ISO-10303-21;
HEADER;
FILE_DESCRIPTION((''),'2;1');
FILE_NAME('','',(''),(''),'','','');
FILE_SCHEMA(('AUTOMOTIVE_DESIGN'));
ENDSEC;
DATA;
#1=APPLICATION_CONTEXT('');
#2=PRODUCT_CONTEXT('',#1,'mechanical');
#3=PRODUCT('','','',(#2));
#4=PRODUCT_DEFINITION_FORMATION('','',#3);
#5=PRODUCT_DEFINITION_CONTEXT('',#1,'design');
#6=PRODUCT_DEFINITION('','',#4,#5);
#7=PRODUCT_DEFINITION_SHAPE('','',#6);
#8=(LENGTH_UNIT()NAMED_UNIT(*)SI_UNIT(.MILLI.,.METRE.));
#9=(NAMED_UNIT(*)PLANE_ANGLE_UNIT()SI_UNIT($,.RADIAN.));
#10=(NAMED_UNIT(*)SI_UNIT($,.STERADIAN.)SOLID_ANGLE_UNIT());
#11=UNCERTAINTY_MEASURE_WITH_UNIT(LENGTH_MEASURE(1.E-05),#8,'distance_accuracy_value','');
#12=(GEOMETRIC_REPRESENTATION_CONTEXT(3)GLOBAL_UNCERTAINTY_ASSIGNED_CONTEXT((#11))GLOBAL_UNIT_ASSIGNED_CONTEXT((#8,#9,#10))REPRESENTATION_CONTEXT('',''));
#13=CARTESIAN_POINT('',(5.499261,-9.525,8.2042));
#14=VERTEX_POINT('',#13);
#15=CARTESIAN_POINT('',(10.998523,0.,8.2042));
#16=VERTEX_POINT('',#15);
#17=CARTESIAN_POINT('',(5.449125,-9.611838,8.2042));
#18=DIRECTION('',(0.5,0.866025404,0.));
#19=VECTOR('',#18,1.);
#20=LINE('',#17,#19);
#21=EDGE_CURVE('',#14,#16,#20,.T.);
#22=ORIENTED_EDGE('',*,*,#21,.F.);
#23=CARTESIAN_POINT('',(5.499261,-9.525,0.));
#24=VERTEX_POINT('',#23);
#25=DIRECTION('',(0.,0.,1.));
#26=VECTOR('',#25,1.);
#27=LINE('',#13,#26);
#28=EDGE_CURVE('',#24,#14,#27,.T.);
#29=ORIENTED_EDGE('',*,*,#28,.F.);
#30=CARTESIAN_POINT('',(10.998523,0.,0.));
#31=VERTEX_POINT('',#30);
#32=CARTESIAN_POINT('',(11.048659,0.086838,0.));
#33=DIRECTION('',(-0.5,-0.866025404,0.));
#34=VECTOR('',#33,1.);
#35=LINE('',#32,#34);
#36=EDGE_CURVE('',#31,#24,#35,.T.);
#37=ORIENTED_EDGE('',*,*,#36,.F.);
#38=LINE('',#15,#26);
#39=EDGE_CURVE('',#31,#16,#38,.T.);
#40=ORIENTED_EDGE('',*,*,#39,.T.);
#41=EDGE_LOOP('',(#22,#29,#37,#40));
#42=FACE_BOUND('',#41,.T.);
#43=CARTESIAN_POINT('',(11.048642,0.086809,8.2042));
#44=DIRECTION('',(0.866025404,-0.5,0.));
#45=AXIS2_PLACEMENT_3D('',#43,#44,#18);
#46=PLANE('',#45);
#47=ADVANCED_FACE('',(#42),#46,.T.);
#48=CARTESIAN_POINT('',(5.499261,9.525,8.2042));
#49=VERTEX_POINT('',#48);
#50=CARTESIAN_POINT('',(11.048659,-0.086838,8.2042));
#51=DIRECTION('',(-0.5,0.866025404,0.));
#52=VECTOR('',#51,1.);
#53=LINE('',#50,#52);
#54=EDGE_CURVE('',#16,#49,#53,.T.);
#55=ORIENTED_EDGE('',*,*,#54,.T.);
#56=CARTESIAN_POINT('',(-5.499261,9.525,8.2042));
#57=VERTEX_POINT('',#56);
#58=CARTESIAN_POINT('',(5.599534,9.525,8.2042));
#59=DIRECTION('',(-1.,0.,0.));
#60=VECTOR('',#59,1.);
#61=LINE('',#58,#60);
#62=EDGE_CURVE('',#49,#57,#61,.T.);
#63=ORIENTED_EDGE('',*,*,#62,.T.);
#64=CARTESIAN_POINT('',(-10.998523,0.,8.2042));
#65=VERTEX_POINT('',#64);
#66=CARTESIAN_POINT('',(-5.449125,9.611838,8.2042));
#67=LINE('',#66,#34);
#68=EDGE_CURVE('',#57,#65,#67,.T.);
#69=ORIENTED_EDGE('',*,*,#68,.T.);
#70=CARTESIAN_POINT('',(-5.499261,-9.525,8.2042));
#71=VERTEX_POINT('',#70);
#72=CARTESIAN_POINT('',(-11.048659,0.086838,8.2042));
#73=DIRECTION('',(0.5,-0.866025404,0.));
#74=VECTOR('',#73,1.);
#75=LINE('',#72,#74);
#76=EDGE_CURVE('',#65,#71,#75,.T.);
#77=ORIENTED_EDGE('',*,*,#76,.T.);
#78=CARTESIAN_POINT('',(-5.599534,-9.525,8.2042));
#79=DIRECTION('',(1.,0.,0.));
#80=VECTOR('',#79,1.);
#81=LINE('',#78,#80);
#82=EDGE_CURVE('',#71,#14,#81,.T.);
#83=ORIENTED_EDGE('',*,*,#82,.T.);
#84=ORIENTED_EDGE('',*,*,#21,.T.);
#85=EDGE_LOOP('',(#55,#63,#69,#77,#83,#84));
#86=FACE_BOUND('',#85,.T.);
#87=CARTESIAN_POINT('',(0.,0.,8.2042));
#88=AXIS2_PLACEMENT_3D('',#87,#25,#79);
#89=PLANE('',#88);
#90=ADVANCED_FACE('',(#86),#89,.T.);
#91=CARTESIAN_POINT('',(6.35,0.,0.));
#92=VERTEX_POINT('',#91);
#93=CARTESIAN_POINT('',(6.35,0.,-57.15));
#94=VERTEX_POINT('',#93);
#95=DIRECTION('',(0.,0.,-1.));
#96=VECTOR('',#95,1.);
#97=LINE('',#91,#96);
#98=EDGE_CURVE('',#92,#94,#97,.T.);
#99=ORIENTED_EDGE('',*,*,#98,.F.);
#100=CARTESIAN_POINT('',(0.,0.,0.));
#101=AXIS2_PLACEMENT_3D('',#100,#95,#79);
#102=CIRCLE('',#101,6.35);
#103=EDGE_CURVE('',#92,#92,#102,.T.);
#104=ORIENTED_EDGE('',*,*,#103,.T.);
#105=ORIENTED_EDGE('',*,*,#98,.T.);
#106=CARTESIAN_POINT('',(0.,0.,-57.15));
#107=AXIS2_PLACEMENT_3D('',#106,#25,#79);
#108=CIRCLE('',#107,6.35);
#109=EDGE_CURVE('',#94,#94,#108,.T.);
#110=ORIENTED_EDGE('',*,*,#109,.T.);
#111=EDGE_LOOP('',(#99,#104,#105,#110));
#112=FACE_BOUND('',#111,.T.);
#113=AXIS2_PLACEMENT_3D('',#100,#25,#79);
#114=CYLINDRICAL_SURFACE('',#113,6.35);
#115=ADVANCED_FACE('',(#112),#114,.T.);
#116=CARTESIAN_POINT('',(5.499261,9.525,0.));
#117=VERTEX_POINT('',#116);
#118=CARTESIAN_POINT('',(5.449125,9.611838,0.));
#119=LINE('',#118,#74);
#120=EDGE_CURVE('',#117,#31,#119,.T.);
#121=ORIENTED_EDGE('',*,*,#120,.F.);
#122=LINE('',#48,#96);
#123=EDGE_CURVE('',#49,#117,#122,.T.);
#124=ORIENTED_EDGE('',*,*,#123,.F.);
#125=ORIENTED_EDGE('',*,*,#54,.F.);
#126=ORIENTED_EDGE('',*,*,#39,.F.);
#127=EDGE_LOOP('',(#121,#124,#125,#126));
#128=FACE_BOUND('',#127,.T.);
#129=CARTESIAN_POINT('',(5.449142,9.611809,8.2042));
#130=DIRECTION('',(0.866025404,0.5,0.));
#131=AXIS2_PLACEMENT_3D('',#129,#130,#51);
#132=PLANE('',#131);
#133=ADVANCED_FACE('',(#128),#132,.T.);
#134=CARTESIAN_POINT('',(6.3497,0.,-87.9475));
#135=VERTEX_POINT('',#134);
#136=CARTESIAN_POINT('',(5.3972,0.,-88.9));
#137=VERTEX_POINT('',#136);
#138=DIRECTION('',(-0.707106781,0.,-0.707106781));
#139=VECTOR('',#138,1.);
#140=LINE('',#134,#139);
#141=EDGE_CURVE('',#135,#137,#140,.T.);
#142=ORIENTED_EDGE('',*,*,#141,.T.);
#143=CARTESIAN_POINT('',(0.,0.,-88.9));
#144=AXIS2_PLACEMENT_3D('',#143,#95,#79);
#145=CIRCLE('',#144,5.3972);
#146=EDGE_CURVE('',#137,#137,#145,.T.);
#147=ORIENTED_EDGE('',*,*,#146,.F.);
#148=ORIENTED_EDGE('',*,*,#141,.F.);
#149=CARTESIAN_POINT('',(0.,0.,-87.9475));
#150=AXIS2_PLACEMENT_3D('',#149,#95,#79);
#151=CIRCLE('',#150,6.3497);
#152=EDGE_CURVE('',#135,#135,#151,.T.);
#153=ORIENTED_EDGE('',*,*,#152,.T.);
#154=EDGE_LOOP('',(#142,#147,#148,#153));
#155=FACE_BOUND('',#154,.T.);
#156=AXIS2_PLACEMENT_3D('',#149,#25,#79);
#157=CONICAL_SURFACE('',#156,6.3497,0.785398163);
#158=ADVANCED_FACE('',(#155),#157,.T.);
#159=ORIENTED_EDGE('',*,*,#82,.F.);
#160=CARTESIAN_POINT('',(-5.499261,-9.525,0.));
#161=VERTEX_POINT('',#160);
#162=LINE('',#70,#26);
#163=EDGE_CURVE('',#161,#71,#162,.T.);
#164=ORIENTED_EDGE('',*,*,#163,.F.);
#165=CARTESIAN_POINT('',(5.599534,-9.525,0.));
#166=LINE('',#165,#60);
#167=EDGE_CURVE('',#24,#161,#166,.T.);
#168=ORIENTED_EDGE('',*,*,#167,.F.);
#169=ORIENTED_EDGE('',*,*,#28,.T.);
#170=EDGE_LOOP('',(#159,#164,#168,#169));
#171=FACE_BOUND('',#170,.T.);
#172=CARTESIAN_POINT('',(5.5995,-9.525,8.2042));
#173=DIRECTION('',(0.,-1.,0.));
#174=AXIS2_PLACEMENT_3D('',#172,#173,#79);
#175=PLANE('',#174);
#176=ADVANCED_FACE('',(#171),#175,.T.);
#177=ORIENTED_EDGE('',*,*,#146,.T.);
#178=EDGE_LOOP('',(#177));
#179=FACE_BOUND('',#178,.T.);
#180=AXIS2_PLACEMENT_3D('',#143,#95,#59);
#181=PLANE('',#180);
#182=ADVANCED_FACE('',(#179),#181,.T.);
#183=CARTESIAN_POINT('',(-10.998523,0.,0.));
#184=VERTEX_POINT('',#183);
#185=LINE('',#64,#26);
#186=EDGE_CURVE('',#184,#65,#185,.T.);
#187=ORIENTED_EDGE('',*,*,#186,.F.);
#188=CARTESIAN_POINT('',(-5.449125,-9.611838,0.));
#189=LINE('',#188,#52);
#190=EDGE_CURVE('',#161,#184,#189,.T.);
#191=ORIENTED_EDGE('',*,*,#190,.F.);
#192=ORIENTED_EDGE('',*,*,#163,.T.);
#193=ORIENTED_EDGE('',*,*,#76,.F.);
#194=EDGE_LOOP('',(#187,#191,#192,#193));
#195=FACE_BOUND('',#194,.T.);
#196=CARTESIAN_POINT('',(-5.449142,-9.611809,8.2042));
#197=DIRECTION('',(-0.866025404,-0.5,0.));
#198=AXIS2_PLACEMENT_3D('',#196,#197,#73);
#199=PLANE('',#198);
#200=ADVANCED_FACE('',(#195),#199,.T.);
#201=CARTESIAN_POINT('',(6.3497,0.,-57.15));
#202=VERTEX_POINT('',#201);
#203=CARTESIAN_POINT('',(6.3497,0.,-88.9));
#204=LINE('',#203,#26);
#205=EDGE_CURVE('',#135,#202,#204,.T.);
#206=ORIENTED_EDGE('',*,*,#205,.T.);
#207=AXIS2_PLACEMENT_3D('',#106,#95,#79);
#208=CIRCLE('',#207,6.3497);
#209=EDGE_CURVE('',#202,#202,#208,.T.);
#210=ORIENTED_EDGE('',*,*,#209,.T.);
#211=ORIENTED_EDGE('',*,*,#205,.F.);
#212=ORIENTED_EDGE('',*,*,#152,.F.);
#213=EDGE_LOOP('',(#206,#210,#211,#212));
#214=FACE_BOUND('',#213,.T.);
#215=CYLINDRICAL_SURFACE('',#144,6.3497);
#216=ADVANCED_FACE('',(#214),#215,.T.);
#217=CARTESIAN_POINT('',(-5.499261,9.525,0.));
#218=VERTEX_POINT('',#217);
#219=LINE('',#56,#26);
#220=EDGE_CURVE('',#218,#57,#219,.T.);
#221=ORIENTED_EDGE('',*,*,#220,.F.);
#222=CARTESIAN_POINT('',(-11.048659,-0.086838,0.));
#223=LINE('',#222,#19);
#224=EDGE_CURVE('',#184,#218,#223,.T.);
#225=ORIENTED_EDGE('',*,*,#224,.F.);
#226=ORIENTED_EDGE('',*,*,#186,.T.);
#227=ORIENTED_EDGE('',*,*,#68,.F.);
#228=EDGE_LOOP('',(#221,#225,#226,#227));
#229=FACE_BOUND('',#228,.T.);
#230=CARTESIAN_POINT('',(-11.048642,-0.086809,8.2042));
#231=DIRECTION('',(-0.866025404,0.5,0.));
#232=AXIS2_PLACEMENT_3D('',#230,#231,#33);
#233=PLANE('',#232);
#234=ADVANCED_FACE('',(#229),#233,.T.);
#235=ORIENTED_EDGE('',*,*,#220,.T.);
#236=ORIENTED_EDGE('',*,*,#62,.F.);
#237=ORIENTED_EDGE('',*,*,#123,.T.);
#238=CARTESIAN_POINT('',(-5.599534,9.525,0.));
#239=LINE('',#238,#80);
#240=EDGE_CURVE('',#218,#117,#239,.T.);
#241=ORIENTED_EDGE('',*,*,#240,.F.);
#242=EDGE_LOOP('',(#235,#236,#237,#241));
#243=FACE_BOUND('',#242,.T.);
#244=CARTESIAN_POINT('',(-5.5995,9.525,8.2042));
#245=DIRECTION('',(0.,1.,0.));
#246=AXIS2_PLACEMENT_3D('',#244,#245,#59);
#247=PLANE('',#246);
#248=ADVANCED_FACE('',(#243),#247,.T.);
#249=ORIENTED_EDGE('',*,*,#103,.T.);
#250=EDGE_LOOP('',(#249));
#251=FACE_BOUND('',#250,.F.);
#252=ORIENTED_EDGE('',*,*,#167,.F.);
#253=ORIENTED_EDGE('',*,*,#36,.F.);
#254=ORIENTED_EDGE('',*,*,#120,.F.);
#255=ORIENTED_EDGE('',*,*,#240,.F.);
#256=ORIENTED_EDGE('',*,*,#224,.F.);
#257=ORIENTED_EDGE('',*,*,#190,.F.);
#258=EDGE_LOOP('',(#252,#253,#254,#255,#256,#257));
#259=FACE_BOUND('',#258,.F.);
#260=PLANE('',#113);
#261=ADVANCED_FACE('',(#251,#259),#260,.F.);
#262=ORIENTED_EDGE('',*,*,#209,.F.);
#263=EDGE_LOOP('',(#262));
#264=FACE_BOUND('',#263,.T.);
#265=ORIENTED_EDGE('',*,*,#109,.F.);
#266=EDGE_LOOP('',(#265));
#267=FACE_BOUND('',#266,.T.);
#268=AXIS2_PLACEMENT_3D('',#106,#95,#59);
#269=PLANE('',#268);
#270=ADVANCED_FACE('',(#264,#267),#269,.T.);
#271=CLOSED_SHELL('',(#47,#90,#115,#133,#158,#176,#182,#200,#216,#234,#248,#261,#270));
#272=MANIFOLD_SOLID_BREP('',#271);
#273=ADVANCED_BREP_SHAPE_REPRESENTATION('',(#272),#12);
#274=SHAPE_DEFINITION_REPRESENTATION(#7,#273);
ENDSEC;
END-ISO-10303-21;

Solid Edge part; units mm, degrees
sketch "Sketch1" plane through (0, 0, 0) normal (0, 0, 1) x (1, 0, 0)
  circle A0 centre (0, 0) radius 11.049
  dimension "D1" = 22.098
extrude "Protrusion1" add sketch "Sketch1" along normal blind 8.2042
sketch "Sketch2" plane through (0, 0, 0) normal (0, 0, -1) x (1, 0, 0)
  circle A0 centre (0, 0) radius 6.35
extrude "Protrusion2" add sketch "Sketch2" along normal blind 88.9
sketch "Sketch3" plane through (0, 0, -88.9) normal (0, 0, -1) x (1, 0, 0)
  circle A0 centre (0, 0) radius 6.3497
extrude "Cutout1" cut sketch "Sketch3" against normal blind 31.75 flip side to cut
chamfer "Chamfer_1" distance 0.9525 angle 45 1 edges at (-6.3497, 0, -88.9)
sketch "Sketch4" plane through (0, 0, 8.2042) normal (0, 0, 1) x (1, 0, 0)
  line L0 (-5.5995, 9.525) -> (5.5995, 9.525)
  dimension "D1" = 19.05
extrude "Cutout2" cut sketch "Sketch4" against normal up to next material side at (0, 9.575, 8.2042)
pattern_circular "Pattern1" count 6 over 360 about axis through (0, 0, 8.2042) along (0, 0, 1) of "Cutout2"
properties part number "24102120"
